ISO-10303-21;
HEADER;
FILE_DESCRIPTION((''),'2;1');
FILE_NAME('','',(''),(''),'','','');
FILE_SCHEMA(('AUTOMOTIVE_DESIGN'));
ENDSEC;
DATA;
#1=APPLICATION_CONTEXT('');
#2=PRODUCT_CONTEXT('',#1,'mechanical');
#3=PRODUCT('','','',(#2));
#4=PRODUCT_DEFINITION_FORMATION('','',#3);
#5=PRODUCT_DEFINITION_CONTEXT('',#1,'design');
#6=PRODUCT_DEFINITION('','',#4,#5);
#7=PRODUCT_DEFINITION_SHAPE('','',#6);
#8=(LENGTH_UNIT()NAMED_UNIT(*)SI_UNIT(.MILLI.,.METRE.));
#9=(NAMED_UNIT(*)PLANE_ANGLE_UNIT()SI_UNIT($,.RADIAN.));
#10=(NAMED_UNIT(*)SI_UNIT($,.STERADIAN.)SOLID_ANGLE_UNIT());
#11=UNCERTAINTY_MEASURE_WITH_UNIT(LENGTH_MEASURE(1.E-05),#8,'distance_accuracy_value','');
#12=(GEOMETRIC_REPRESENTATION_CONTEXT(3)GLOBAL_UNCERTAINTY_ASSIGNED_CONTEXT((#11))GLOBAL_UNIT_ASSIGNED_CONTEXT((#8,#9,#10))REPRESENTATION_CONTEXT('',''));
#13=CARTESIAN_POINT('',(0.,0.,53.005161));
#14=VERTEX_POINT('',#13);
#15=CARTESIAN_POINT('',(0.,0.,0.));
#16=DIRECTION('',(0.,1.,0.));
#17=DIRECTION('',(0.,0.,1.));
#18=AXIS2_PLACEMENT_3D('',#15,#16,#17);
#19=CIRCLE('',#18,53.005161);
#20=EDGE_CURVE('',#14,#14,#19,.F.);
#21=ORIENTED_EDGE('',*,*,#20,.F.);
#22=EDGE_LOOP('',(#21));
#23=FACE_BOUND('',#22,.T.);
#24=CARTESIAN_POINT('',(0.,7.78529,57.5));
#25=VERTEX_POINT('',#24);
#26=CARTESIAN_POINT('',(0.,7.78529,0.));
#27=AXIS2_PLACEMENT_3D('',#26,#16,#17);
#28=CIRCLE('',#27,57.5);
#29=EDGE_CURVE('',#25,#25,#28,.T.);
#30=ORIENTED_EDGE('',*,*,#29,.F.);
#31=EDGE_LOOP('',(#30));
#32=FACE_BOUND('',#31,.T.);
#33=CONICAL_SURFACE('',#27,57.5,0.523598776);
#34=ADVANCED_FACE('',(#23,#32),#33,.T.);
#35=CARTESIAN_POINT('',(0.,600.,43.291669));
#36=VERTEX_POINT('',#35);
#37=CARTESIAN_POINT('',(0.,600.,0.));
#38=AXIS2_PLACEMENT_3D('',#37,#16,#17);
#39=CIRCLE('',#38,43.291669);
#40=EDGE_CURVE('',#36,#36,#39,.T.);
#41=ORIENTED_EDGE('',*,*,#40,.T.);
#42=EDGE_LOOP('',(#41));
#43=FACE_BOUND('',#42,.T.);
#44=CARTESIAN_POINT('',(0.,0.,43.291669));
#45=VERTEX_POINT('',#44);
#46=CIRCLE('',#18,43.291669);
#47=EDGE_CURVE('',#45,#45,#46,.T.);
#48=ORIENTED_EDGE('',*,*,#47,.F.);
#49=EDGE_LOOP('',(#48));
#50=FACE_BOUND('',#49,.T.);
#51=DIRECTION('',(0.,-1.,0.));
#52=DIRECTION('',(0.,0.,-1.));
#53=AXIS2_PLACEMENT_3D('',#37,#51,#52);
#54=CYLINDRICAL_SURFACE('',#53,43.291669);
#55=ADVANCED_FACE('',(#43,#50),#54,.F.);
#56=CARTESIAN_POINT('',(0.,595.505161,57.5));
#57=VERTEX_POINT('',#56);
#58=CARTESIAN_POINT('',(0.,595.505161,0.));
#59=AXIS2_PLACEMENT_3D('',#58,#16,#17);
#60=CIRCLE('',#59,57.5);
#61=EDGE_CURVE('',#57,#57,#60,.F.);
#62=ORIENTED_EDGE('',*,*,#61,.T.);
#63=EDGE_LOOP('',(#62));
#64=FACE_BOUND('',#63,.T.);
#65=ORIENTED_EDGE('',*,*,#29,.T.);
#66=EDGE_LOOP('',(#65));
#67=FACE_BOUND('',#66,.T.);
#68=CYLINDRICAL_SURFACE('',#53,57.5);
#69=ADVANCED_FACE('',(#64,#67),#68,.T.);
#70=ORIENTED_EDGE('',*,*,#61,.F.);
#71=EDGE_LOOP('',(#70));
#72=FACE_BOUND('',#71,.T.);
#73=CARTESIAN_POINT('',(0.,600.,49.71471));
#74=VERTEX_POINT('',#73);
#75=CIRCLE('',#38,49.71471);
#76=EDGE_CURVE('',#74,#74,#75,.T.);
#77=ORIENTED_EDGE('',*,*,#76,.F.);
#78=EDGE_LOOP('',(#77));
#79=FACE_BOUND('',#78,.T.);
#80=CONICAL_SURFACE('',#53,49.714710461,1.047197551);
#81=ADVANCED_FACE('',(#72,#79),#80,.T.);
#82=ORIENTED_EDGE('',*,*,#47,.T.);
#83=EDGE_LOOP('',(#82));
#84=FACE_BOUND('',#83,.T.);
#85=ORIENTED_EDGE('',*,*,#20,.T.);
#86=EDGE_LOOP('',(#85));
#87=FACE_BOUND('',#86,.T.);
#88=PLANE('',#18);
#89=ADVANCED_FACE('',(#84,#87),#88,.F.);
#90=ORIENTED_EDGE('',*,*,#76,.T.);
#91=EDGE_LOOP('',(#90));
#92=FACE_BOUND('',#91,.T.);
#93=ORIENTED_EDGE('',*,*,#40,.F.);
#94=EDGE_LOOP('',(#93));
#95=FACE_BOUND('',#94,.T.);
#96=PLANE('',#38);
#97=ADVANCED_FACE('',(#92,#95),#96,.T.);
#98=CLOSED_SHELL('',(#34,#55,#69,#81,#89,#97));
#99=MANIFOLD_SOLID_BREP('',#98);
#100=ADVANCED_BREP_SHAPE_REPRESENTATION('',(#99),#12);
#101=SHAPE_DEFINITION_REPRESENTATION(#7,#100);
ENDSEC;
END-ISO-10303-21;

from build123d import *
from OCP.BRepFilletAPI import BRepFilletAPI_MakeChamfer

# Parameters (mm, degrees)
SKETCH1_R           = 57.5
BOSS_EXTRUDE1_DEPTH = 600
SKETCH2_R           = 43.291669187
CUT_EXTRUDE1_DEPTH  = 606.485342515
CHAMFER1_SIZE       = 4.494839011
CHAMFER1_SIZE2      = 7.785289539


with BuildPart() as part:
    # Sketch1 → Boss-Extrude1 (new body)
    with BuildSketch(Plane(origin=(0, 0, 0), x_dir=(1, 0, 0), z_dir=(0, 1, 0))):
        Circle(SKETCH1_R)
    extrude(amount=BOSS_EXTRUDE1_DEPTH)

    # Sketch2 → Cut-Extrude1 (cut, through all)
    with BuildSketch(Plane(origin=(0, 0, 0), x_dir=(1, 0, 0), z_dir=(0, 1, 0))):
        Circle(SKETCH2_R)
    extrude(amount=CUT_EXTRUDE1_DEPTH, mode=Mode.SUBTRACT)

    # Chamfer1: one chamfer whose edges measure the first distance from different faces: ONE call of the kernel's chamfer builder (chamfer() names one face for all edges)
    chamfer1_edges_1 = [part.edges().sort_by_distance(p)[0] for p in [
        (-57.5, 600, 0),
    ]]
    chamfer1_side_1 = [part.faces().sort_by_distance(p)[0] for p in [
        (-57.5, 300, 0),
    ]]
    chamfer1_edges_2 = [part.edges().sort_by_distance(p)[0] for p in [
        (-57.5, 0, 0),
    ]]
    chamfer1_side_2 = [part.faces().sort_by_distance(p)[0] for p in [
        (-55.873654403, 0, 0),
    ]]
    chamfer1 = BRepFilletAPI_MakeChamfer(part.part.solid().wrapped)
    for e in chamfer1_edges_1:
        chamfer1.Add(CHAMFER1_SIZE, CHAMFER1_SIZE2, e.wrapped, chamfer1_side_1[0].wrapped)  # the first distance lies on this face
    for e in chamfer1_edges_2:
        chamfer1.Add(CHAMFER1_SIZE, CHAMFER1_SIZE2, e.wrapped, chamfer1_side_2[0].wrapped)  # the first distance lies on this face
    add(Compound.cast(chamfer1.Shape()), mode=Mode.REPLACE)


solid = part.part
